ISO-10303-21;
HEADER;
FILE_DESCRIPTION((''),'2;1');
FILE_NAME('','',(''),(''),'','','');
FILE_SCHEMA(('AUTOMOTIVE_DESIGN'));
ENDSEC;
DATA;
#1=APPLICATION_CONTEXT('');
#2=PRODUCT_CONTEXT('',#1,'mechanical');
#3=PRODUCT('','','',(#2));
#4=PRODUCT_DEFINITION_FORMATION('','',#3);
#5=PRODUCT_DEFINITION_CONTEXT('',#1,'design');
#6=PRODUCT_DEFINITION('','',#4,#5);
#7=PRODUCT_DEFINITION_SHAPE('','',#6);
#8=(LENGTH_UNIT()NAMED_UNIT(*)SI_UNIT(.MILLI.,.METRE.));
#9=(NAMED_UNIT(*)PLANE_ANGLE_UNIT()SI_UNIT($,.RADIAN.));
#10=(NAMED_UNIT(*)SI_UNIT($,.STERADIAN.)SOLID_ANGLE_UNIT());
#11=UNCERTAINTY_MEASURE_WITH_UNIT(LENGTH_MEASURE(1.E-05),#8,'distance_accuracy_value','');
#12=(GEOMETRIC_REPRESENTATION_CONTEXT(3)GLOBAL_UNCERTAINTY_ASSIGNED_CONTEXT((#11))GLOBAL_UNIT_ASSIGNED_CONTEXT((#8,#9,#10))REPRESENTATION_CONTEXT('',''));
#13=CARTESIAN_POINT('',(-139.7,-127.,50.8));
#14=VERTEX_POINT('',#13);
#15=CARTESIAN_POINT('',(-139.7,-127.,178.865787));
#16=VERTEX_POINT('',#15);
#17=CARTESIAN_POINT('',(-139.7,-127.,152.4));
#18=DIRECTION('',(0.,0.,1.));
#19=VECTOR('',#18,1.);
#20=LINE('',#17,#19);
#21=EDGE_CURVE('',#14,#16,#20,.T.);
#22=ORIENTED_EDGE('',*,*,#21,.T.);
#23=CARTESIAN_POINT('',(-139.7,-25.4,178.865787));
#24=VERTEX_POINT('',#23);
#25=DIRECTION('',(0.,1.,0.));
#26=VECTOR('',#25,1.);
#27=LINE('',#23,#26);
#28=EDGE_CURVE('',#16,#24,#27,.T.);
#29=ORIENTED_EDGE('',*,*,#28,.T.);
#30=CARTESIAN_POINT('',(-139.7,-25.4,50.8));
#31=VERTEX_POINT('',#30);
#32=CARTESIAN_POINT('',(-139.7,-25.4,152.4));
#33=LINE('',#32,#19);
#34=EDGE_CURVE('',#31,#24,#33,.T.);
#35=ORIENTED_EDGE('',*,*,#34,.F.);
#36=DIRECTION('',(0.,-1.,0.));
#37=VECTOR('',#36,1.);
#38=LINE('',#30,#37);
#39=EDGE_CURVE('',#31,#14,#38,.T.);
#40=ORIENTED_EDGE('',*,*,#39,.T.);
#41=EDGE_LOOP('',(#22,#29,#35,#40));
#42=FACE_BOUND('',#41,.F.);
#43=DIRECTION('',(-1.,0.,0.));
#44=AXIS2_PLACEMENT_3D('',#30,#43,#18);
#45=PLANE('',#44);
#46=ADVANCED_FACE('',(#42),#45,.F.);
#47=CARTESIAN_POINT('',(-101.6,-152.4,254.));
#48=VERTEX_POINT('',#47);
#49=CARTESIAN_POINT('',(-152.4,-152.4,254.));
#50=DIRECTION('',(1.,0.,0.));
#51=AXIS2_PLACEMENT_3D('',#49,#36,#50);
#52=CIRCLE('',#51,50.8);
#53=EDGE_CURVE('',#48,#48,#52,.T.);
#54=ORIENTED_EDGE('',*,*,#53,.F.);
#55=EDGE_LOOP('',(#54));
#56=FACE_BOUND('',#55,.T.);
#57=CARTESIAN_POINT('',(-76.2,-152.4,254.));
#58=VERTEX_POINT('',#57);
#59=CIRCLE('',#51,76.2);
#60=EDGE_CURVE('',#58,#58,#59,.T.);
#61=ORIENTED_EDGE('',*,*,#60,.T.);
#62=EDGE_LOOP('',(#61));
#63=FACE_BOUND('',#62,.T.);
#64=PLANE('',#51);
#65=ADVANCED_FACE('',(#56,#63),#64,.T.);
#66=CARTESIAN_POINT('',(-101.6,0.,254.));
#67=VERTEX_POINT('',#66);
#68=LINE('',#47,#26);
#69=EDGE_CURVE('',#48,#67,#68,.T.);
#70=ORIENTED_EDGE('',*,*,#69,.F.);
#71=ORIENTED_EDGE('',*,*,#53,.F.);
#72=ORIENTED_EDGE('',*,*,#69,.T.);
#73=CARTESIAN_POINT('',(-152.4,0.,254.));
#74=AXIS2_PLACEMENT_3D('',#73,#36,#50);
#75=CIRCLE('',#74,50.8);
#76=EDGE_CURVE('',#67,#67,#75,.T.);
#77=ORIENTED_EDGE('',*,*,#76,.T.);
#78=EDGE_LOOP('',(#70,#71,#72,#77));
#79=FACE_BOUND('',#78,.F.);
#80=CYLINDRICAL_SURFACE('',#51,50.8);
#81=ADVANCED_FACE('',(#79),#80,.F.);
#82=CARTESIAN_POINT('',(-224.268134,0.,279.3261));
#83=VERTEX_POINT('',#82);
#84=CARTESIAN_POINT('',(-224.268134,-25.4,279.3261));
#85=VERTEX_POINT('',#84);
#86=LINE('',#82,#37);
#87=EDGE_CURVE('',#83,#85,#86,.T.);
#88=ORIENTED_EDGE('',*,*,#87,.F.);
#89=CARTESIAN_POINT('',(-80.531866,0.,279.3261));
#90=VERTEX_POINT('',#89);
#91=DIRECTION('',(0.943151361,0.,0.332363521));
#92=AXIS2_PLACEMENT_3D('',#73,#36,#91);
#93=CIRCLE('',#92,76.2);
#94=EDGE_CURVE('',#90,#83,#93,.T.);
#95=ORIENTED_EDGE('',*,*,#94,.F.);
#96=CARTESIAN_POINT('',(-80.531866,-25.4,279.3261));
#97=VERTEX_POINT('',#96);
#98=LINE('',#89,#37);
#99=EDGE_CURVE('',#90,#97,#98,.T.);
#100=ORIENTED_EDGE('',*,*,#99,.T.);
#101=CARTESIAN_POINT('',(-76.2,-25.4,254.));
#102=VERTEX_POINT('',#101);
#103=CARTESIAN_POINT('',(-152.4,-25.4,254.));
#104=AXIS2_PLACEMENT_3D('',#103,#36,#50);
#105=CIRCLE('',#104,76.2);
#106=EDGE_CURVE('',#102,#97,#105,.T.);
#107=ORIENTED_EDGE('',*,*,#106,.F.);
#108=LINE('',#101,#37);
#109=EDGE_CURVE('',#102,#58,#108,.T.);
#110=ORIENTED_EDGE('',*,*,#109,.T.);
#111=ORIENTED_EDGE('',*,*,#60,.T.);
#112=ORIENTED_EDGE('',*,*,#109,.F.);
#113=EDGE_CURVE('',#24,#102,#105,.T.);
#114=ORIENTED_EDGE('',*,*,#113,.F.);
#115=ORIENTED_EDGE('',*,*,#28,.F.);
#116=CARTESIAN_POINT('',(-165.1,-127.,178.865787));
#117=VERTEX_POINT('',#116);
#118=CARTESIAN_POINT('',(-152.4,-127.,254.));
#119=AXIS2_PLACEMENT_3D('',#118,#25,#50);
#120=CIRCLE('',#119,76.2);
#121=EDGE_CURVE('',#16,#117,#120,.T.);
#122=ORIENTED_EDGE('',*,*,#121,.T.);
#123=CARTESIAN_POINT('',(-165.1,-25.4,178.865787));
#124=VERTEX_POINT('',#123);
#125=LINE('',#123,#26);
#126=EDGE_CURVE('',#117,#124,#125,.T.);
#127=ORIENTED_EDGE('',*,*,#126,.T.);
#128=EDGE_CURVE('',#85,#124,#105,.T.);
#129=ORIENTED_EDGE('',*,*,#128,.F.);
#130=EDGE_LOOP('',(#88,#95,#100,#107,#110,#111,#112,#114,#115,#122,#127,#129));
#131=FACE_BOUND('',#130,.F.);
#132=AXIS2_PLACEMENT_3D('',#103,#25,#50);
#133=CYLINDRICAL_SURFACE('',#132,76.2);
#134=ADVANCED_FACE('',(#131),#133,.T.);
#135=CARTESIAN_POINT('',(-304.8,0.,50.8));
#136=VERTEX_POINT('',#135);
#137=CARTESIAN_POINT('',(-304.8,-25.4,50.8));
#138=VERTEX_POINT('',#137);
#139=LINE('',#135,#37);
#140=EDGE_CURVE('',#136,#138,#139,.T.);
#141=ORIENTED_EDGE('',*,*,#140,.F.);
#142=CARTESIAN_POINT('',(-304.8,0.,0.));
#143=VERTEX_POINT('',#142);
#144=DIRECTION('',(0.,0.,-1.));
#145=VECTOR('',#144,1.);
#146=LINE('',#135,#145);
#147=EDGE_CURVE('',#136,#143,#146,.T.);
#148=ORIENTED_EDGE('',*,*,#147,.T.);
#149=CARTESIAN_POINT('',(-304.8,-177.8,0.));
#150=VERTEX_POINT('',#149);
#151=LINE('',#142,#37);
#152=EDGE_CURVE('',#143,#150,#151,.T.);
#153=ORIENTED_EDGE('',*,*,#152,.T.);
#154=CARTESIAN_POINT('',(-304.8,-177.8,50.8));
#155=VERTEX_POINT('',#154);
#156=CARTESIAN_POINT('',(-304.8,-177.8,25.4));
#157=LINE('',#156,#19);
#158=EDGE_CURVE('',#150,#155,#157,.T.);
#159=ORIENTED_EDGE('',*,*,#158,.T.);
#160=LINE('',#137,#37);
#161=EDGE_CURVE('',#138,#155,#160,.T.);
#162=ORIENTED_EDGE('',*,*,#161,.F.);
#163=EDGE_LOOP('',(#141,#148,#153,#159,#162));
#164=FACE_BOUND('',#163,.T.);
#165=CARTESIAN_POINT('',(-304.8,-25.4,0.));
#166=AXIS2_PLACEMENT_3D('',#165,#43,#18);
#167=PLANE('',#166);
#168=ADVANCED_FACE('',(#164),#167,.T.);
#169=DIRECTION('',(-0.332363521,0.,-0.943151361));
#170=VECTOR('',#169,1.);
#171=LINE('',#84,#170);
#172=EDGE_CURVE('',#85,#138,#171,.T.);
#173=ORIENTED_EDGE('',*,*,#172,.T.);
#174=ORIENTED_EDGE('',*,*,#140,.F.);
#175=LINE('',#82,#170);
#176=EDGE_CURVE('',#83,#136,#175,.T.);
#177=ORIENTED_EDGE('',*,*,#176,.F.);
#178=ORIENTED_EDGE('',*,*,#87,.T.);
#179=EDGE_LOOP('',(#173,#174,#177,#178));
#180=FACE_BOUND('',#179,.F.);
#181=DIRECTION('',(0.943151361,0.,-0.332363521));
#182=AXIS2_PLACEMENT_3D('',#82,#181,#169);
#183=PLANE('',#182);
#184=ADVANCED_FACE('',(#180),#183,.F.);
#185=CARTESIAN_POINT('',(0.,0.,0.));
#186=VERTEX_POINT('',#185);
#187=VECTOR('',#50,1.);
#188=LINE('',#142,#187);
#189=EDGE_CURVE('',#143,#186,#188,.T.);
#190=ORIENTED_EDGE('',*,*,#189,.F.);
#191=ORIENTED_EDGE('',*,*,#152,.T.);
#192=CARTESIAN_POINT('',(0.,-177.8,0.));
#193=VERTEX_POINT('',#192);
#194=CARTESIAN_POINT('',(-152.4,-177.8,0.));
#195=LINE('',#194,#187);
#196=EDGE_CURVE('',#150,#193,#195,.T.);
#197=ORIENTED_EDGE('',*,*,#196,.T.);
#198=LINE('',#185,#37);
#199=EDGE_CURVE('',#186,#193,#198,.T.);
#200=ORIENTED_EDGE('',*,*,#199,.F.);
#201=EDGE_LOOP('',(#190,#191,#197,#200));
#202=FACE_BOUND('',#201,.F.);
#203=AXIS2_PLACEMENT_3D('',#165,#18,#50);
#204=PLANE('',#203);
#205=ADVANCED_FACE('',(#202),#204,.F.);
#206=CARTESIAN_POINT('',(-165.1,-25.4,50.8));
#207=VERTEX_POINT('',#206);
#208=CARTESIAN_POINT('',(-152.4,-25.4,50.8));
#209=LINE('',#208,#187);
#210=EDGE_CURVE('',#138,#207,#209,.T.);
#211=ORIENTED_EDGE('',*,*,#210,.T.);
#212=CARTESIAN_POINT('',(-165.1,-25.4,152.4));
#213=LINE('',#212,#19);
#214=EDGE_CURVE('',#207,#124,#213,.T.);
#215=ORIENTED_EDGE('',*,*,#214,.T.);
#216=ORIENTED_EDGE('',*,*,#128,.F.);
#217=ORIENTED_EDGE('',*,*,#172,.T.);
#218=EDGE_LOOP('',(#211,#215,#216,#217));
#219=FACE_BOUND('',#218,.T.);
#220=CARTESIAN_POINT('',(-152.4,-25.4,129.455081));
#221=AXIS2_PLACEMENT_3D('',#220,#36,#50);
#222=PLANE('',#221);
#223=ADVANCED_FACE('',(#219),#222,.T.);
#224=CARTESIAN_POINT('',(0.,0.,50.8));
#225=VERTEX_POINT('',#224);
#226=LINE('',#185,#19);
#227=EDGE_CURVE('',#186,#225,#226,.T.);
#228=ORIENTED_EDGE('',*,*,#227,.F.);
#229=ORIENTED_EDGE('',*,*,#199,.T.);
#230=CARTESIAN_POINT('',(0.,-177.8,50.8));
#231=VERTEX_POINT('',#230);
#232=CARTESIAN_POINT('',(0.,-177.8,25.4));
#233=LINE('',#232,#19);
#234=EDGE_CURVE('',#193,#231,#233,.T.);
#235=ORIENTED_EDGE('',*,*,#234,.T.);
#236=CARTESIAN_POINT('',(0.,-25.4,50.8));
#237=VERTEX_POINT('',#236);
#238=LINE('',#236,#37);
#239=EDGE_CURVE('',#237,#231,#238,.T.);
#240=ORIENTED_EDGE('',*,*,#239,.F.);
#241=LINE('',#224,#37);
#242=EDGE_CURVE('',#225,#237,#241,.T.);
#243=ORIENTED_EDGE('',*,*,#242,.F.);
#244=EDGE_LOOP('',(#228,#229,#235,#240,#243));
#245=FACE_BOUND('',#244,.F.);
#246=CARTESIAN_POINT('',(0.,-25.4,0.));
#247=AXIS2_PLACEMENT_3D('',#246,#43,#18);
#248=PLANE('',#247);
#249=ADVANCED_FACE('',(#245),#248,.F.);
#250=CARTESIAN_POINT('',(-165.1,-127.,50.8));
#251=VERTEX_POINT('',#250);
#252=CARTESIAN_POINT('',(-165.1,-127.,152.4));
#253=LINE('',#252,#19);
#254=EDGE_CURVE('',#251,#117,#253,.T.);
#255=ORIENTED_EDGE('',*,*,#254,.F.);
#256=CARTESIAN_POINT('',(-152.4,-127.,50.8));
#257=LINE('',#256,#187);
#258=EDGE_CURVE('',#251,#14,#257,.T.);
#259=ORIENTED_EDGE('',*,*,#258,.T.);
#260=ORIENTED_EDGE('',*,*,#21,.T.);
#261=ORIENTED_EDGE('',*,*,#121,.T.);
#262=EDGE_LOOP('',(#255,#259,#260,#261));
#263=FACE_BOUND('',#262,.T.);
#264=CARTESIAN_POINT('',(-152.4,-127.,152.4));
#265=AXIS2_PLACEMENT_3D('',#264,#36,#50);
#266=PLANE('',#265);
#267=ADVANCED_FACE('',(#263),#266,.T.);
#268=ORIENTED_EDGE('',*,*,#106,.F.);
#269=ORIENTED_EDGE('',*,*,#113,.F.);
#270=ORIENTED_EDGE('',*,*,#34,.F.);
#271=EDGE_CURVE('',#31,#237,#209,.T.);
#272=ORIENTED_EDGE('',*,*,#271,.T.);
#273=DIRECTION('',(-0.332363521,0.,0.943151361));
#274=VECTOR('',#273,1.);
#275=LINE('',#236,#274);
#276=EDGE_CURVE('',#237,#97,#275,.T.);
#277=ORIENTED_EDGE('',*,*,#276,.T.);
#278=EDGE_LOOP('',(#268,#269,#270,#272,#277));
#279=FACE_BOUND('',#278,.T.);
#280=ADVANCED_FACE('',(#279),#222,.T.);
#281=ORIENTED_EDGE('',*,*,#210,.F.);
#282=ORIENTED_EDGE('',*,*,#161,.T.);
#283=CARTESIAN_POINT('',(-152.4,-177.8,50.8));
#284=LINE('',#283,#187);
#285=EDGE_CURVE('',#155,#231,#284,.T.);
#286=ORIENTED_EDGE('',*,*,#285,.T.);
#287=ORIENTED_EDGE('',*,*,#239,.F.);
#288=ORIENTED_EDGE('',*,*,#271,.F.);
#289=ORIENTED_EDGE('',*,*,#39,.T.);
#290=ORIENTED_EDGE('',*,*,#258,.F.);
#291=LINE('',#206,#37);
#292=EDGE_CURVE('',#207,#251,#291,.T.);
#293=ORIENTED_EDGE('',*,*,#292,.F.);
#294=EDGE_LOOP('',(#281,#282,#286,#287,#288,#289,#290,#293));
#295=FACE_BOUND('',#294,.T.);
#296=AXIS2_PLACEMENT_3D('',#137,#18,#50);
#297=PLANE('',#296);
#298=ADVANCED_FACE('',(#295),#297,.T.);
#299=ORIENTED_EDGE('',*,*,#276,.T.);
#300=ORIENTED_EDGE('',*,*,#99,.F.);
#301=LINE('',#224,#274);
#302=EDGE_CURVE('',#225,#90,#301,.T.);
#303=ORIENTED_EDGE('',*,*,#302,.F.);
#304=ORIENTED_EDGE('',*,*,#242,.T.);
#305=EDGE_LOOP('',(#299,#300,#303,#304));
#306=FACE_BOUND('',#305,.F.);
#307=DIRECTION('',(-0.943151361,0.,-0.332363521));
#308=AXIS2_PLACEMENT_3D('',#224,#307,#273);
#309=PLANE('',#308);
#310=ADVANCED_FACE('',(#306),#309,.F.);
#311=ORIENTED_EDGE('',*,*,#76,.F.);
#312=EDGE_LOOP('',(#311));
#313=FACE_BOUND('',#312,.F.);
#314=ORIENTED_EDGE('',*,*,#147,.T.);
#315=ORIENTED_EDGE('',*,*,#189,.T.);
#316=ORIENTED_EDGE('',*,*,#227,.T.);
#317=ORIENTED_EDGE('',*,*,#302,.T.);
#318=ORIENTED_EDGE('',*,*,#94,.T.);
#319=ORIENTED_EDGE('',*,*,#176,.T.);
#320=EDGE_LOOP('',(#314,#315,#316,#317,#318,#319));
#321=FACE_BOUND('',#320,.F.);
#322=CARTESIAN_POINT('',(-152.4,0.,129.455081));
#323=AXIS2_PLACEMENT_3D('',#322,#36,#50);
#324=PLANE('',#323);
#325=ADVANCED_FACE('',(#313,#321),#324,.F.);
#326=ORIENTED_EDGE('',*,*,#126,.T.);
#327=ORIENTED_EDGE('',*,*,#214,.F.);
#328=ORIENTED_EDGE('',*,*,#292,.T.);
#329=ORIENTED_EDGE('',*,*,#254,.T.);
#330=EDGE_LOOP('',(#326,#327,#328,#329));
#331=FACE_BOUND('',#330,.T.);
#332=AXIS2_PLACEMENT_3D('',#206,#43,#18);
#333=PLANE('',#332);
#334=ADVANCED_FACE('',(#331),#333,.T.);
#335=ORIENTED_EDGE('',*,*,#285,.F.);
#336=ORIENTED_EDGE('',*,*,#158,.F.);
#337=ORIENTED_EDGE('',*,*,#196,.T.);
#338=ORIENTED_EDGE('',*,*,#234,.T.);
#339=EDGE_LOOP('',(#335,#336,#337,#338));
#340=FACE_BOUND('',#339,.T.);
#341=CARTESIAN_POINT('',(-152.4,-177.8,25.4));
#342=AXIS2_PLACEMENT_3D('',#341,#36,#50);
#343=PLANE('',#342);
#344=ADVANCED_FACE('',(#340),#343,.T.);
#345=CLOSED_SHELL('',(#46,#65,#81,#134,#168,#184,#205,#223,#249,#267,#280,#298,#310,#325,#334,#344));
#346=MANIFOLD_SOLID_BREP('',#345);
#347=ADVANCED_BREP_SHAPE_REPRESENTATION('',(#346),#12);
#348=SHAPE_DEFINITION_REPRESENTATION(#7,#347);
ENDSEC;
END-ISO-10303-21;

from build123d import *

# Parameters (mm, degrees)
F2_DEPTH  = 25.4
F3_W      = 304.8
F3_H      = 50.8
F4_DEPTH  = 152.4
F5_W      = 25.4
F5_H      = 203.2
F6_DEPTH  = 101.6
F7_R      = 76.2
F8_DEPTH  = 127
F9_R      = 50.8
F10_DEPTH = 152.401


# Not quite as in the source:
# - a variable given as a bare number and used for a length is read in inches; the dataset says mm whatever the document's units were


with BuildPart() as f2:
    # F1 (on Front) → F2 (new body)
    with BuildSketch(Plane.XZ):
        with BuildLine():
            Line((-304.8, 0), (0, 0))
            Line((0, 0), (0, 50.8))
            Line((0, 50.8), (-80.5318662816, 279.3261002888))
            ThreePointArc((-80.5318662816, 279.3261002888), (-152.4, 330.2), (-224.2681337184, 279.3261002888))
            Line((-224.2681337184, 279.3261002888), (-304.8, 50.8))
            Line((-304.8, 50.8), (-304.8, 0))
        make_face()
    extrude(amount=F2_DEPTH)

    # F3 (on face) → F4 (join)
    with BuildSketch(Plane.XZ.offset(25.4)):
        with Locations((-152.4, 25.4)):
            Rectangle(F3_W, F3_H)
    extrude(amount=F4_DEPTH)

    # F5 (on face) → F6 (join)
    with BuildSketch(Plane.XZ.offset(25.4)):
        with Locations((-152.4, 152.4)):
            Rectangle(F5_W, F5_H)
    extrude(amount=F6_DEPTH)

    # F7 (on face) → F8 (join)
    with BuildSketch(Plane.XZ.offset(25.4)):
        with Locations((-152.4, 254)):
            Circle(F7_R)
    extrude(amount=F8_DEPTH)

    # F9 (on face) → F10 (cut, through all)
    with BuildSketch(Plane.XZ.offset(152.4)):
        with Locations((-152.4, 254)):
            Circle(F9_R)
    extrude(amount=-F10_DEPTH, mode=Mode.SUBTRACT)


solid = f2.part
